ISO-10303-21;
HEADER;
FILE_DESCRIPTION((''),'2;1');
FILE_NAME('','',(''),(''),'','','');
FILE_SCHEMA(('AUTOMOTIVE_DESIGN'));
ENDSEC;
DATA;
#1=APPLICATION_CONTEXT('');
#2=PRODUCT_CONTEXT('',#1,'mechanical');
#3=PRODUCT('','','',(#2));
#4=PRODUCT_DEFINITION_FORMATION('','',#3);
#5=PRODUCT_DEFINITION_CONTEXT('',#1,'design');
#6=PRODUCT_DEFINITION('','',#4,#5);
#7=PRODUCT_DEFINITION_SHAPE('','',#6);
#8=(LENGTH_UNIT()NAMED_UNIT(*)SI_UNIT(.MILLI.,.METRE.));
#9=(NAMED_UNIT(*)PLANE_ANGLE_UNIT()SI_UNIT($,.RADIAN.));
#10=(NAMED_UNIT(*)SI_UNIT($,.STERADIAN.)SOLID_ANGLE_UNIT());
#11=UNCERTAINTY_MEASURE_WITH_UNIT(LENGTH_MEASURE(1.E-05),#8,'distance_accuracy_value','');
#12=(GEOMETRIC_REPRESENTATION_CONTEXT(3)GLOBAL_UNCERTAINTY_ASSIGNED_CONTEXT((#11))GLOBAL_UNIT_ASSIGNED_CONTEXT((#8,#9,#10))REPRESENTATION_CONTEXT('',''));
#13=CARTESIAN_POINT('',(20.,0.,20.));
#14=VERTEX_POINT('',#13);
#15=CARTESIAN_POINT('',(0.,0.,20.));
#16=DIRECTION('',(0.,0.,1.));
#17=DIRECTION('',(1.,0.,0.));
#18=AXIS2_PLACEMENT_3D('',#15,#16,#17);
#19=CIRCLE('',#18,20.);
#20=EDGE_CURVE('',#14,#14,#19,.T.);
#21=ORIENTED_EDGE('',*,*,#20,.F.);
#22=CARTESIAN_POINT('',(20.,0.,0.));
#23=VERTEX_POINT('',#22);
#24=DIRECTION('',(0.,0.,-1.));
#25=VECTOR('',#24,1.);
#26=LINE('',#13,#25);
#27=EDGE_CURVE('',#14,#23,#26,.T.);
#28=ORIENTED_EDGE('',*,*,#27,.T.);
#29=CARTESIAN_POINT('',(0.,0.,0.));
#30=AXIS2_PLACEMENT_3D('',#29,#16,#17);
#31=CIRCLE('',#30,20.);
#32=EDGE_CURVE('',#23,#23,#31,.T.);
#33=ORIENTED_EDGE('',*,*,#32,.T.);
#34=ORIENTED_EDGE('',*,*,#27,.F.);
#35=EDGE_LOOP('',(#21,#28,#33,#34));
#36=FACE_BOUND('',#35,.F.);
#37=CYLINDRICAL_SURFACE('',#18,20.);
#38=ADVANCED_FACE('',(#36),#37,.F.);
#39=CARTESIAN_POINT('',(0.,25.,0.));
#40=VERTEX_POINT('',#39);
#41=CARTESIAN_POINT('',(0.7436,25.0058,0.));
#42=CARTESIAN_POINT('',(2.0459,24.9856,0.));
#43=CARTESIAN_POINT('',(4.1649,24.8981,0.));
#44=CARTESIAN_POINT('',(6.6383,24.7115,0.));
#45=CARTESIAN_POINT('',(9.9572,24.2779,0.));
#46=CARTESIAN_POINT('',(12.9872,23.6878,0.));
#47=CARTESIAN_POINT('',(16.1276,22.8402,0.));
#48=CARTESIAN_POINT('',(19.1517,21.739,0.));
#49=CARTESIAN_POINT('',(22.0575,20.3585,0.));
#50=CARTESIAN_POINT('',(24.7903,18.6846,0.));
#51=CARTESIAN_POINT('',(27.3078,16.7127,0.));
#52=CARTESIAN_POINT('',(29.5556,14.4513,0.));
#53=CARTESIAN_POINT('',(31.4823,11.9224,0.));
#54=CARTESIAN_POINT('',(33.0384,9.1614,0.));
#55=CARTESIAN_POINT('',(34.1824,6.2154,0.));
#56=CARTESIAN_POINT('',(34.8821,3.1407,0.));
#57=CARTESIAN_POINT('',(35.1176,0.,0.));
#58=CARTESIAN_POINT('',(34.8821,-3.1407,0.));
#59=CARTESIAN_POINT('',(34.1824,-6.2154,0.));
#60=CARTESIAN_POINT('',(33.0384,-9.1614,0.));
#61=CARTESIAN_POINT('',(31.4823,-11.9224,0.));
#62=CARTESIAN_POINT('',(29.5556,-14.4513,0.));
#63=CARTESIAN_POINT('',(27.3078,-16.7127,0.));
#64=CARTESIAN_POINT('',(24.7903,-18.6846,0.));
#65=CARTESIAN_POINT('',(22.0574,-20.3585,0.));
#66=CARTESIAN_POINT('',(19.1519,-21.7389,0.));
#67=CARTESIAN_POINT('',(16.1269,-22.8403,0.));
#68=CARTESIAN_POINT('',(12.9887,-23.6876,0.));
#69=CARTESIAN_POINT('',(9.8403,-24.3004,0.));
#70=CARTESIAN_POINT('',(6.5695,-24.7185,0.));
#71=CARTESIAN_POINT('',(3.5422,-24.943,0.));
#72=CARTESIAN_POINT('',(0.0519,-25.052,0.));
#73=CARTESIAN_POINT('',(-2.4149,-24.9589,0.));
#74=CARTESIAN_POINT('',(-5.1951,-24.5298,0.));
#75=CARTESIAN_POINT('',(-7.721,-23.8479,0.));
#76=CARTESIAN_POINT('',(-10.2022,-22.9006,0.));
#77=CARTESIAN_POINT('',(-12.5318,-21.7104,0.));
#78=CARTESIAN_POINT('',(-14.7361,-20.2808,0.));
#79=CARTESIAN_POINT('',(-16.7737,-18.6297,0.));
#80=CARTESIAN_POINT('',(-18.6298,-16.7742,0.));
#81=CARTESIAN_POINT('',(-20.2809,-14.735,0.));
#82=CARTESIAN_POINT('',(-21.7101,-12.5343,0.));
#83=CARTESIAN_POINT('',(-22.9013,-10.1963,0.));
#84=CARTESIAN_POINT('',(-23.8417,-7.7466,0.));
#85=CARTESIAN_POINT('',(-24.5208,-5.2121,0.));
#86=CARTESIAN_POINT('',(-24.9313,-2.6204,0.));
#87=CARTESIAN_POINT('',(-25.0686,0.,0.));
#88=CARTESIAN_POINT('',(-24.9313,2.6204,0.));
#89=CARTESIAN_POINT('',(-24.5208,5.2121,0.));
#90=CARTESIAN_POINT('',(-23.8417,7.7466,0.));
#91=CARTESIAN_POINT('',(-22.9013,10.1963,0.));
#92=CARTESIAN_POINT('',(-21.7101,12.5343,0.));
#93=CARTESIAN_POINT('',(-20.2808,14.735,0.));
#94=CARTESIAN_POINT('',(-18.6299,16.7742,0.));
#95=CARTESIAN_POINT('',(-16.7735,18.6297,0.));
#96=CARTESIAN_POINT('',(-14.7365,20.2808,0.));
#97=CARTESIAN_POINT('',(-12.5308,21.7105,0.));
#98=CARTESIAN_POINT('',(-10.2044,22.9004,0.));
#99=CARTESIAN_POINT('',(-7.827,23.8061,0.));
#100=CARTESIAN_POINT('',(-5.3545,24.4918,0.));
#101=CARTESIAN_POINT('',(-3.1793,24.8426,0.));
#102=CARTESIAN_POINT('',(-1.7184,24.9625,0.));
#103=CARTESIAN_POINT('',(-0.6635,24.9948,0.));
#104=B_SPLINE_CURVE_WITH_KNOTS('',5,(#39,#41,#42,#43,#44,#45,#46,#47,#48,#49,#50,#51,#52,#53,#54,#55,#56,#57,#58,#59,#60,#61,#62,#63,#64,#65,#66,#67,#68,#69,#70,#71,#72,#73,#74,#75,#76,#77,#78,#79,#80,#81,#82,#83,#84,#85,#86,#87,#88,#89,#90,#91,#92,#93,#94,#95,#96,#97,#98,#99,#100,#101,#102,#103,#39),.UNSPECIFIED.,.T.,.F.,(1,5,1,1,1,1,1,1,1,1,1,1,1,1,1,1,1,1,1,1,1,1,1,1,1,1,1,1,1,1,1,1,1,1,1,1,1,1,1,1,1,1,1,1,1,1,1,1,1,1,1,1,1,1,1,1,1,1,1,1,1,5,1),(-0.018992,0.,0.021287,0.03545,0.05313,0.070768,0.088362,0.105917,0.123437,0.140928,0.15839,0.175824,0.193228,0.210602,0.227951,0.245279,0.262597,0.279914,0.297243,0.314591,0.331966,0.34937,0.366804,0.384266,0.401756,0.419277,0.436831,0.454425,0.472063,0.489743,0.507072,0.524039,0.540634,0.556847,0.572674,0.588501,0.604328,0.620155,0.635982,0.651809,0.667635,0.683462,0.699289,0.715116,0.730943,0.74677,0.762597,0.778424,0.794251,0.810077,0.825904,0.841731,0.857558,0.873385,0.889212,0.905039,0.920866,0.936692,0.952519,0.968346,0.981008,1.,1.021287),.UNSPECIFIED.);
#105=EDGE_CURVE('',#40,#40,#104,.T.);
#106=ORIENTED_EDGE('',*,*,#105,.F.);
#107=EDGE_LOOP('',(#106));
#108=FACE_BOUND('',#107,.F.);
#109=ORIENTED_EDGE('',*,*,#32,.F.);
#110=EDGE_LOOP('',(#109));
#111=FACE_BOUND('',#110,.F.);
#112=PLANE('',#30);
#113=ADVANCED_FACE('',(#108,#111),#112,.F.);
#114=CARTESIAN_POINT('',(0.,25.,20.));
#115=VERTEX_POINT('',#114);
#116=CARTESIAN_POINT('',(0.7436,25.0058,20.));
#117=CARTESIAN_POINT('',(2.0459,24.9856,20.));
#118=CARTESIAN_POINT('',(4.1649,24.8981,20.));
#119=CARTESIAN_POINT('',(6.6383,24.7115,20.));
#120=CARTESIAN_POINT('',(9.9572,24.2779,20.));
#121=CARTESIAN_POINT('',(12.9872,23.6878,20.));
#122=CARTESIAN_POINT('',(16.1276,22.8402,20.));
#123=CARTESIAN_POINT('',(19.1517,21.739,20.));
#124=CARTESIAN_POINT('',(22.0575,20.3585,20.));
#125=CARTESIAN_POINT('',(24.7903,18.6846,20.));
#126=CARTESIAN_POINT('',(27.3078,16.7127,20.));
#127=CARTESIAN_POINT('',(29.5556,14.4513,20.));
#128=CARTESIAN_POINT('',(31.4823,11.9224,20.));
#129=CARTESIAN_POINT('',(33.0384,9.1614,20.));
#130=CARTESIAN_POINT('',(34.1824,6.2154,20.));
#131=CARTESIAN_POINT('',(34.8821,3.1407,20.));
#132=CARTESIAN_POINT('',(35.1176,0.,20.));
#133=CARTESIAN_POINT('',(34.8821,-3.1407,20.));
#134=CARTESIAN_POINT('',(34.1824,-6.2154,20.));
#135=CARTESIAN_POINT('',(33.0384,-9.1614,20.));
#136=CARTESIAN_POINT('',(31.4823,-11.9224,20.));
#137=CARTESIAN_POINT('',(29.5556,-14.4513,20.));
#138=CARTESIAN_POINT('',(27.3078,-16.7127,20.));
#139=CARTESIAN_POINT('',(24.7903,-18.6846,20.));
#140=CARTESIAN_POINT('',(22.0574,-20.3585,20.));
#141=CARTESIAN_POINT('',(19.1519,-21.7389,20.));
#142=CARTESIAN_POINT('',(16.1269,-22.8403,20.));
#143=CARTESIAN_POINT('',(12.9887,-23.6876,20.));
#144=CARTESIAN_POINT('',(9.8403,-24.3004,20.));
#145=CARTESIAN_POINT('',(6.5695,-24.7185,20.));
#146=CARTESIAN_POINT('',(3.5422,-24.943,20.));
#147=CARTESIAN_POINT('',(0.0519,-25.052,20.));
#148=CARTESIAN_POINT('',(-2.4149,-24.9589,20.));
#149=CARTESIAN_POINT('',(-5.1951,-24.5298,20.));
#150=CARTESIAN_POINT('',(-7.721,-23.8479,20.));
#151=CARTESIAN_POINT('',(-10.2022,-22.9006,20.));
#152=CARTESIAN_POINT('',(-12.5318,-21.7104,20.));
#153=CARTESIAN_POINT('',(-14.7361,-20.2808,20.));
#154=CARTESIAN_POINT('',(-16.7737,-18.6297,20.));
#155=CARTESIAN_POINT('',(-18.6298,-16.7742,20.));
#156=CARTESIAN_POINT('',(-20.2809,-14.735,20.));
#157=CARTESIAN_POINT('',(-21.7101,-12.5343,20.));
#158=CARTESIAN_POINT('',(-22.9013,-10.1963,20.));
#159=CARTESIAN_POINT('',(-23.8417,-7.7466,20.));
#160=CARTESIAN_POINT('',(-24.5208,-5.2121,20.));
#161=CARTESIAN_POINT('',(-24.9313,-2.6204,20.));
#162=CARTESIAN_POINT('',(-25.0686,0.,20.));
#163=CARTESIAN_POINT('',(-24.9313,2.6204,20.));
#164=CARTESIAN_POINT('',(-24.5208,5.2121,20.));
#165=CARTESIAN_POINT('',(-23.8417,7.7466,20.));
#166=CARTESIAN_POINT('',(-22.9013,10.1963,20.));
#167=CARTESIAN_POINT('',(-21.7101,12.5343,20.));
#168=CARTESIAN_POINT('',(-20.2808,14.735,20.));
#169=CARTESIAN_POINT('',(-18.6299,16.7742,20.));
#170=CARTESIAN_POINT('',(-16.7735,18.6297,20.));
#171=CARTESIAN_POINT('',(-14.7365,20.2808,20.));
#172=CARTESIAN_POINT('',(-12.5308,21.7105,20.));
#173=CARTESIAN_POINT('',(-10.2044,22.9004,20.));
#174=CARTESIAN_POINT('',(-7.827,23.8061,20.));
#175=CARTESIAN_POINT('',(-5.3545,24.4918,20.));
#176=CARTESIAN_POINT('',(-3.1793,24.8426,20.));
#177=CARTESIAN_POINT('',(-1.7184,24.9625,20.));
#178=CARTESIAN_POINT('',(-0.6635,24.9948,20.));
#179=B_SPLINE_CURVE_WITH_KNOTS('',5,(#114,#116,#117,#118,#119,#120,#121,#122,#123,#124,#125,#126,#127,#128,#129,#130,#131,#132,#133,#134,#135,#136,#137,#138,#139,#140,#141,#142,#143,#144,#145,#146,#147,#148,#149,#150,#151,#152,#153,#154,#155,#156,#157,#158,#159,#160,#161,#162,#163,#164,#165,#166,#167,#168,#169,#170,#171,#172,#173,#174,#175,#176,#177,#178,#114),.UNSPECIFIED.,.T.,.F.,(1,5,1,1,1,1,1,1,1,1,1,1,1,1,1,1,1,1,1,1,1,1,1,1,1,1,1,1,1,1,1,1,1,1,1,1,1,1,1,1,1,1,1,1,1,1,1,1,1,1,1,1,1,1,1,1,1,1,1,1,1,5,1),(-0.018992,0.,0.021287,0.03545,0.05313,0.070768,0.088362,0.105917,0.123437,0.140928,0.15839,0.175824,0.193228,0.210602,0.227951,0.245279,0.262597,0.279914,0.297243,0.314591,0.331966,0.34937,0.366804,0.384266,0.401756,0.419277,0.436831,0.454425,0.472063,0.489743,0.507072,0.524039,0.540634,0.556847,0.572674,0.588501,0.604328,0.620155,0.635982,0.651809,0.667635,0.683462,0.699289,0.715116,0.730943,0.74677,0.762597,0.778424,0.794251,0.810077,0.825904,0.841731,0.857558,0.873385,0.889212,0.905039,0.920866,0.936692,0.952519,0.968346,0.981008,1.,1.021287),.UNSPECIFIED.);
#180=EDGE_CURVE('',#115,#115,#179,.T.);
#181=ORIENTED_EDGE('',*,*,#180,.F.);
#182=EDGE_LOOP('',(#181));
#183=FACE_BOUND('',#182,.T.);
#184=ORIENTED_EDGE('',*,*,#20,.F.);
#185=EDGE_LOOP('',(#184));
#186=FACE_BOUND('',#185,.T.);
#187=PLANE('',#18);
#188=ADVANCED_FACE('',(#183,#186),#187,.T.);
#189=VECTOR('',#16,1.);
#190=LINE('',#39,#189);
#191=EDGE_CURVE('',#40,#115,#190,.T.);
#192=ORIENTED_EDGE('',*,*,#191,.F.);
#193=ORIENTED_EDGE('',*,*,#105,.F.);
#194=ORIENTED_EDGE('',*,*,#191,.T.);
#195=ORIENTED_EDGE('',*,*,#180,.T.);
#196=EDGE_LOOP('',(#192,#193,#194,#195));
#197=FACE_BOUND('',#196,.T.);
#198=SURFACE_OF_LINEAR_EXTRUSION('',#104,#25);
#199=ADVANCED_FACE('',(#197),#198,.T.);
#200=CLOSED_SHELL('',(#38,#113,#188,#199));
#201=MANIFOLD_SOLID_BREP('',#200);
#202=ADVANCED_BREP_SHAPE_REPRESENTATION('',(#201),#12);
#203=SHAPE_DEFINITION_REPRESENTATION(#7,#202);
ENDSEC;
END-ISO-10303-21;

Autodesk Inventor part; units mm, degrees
ref_plane "YZ Plane" through (0, 0, 0) normal (1, 0, 0) x (0, 1, 0)
ref_plane "XZ Plane" through (0, 0, 0) normal (0, 1, 0) x (-1, 0, 0)
sketch "主草图" plane through (0, 0, 0) normal (0, 0, 1) x (1, 0, 0)
  spline S0 degree 5 poles (0, 25) (0.7436, 25.0058) (2.0459, 24.9856) (4.1649, 24.8981) (6.6383, 24.7115) (9.9572, 24.2779) (12.9872, 23.6878) (16.1276, 22.8402) (19.1517, 21.739) (22.0575, 20.3585) (24.7903, 18.6846) (27.3078, 16.7127) (29.5556, 14.4513) (31.4823, 11.9224) (33.0384, 9.1614) (34.1824, 6.2154) (34.8821, 3.1407) (35.1176, 0) (34.8821, -3.1407) (34.1824, -6.2154) (33.0384, -9.1614) (31.4823, -11.9224) (29.5556, -14.4513) (27.3078, -16.7127) (24.7903, -18.6846) (22.0574, -20.3585) (19.1519, -21.7389) (16.1269, -22.8403) (12.9887, -23.6876) (9.8403, -24.3004) (6.5695, -24.7185) (3.5422, -24.943) (0.0519, -25.052) (-2.4149, -24.9589) (-5.1951, -24.5298) (-7.721, -23.8479) (-10.2022, -22.9006) (-12.5318, -21.7104) (-14.7361, -20.2808) (-16.7737, -18.6297) (-18.6298, -16.7742) (-20.2809, -14.735) (-21.7101, -12.5343) (-22.9013, -10.1963) (-23.8417, -7.7466) (-24.5208, -5.2121) (-24.9313, -2.6204) (-25.0686, 0) (-24.9313, 2.6204) (-24.5208, 5.2121) (-23.8417, 7.7466) (-22.9013, 10.1963) (-21.7101, 12.5343) (-20.2808, 14.735) (-18.6299, 16.7742) (-16.7735, 18.6297) (-14.7365, 20.2808) (-12.5308, 21.7105) (-10.2044, 22.9004) (-7.827, 23.8061) (-5.3545, 24.4918) (-3.1793, 24.8426) (-1.7184, 24.9625) (-0.6635, 24.9948) (0, 25) knots 0 0 0 0 0 0 0.021287 0.03545 0.05313 0.070768 0.088362 0.105917 0.123437 0.140928 0.15839 0.175824 0.193228 0.210602 0.227951 0.245279 0.262597 0.279914 0.297243 0.314591 0.331966 0.34937 0.366804 0.384266 0.401756 0.419277 0.436831 0.454425 0.472063 0.489743 0.507072 0.524039 0.540634 0.556847 0.572674 0.588501 0.604328 0.620155 0.635982 0.651809 0.667635 0.683462 0.699289 0.715116 0.730943 0.74677 0.762597 0.778424 0.794251 0.810077 0.825904 0.841731 0.857558 0.873385 0.889212 0.905039 0.920866 0.936692 0.952519 0.968346 0.981008 1 1 1 1 1 1
  point P0 (6.5702, 24.6757)
  point P1 (9.8108, 24.2515)
  point P2 (12.9988, 23.6256)
  point P3 (16.1148, 22.7719)
  point P4 (19.1343, 21.664)
  point P5 (22.0248, 20.2795)
  point P6 (24.7457, 18.6037)
  point P7 (27.2491, 16.6327)
  point P8 (29.4834, 14.3753)
  point P9 (31.3964, 11.8542)
  point P10 (32.9402, 9.1052)
  point P11 (34.0739, 6.1752)
  point P12 (34.7669, 3.1197)
  point P13 (35, 0)
  point P14 (34.7669, -3.1197)
  point P15 (34.0739, -6.1752)
  point P16 (32.9402, -9.1052)
  point P17 (31.3964, -11.8542)
  point P18 (29.4834, -14.3753)
  point P19 (27.2491, -16.6327)
  point P20 (24.7457, -18.6037)
  point P21 (22.0248, -20.2795)
  point P22 (19.1343, -21.664)
  point P23 (16.1148, -22.7719)
  point P24 (12.9988, -23.6256)
  point P25 (9.8108, -24.2515)
  point P26 (6.5702, -24.6757)
  point P27 (3.2942, -24.9202)
  point P28 (0, -25)
  point P29 (-2.6132, -24.863)
  point P30 (-5.1978, -24.4537)
  point P31 (-7.7254, -23.7764)
  point P32 (-10.1684, -22.8386)
  point P33 (-12.5, -21.6506)
  point P34 (-14.6946, -20.2254)
  point P35 (-16.7283, -18.5786)
  point P36 (-18.5786, -16.7283)
  point P37 (-20.2254, -14.6946)
  point P38 (-21.6506, -12.5)
  point P39 (-22.8386, -10.1684)
  point P40 (-23.7764, -7.7254)
  point P41 (-24.4537, -5.1978)
  point P42 (-24.863, -2.6132)
  point P43 (-25, 0)
  point P44 (-24.863, 2.6132)
  point P45 (-24.4537, 5.1978)
  point P46 (-23.7764, 7.7254)
  point P47 (-22.8386, 10.1684)
  point P48 (-21.6506, 12.5)
  point P49 (-20.2254, 14.6946)
  point P50 (-18.5786, 16.7283)
  point P51 (-16.7283, 18.5786)
  point P52 (-14.6946, 20.2254)
  point P53 (-12.5, 21.6506)
  point P54 (-10.1684, 22.8386)
  point P55 (-7.7254, 23.7764)
  point P56 (-5.1978, 24.4537)
  point P57 (-2.6132, 24.863)
extrude "凸轮" add sketch "主草图" along normal blind 20
sketch "草图2" plane through (0, 0, 20) normal (0, 0, 1) x (1, 0, 0)
  circle A0 centre (0, 0) radius 20
  dimension "d4" = 40
extrude "拉伸2" cut sketch "草图2" against normal through all
ref_plane "工作平面1" through (0, 0, 10) normal (0, 0, 1) x (1, 0, 0)
properties part number "盘式凸轮" material "Stainless Steel, Austenitic"
